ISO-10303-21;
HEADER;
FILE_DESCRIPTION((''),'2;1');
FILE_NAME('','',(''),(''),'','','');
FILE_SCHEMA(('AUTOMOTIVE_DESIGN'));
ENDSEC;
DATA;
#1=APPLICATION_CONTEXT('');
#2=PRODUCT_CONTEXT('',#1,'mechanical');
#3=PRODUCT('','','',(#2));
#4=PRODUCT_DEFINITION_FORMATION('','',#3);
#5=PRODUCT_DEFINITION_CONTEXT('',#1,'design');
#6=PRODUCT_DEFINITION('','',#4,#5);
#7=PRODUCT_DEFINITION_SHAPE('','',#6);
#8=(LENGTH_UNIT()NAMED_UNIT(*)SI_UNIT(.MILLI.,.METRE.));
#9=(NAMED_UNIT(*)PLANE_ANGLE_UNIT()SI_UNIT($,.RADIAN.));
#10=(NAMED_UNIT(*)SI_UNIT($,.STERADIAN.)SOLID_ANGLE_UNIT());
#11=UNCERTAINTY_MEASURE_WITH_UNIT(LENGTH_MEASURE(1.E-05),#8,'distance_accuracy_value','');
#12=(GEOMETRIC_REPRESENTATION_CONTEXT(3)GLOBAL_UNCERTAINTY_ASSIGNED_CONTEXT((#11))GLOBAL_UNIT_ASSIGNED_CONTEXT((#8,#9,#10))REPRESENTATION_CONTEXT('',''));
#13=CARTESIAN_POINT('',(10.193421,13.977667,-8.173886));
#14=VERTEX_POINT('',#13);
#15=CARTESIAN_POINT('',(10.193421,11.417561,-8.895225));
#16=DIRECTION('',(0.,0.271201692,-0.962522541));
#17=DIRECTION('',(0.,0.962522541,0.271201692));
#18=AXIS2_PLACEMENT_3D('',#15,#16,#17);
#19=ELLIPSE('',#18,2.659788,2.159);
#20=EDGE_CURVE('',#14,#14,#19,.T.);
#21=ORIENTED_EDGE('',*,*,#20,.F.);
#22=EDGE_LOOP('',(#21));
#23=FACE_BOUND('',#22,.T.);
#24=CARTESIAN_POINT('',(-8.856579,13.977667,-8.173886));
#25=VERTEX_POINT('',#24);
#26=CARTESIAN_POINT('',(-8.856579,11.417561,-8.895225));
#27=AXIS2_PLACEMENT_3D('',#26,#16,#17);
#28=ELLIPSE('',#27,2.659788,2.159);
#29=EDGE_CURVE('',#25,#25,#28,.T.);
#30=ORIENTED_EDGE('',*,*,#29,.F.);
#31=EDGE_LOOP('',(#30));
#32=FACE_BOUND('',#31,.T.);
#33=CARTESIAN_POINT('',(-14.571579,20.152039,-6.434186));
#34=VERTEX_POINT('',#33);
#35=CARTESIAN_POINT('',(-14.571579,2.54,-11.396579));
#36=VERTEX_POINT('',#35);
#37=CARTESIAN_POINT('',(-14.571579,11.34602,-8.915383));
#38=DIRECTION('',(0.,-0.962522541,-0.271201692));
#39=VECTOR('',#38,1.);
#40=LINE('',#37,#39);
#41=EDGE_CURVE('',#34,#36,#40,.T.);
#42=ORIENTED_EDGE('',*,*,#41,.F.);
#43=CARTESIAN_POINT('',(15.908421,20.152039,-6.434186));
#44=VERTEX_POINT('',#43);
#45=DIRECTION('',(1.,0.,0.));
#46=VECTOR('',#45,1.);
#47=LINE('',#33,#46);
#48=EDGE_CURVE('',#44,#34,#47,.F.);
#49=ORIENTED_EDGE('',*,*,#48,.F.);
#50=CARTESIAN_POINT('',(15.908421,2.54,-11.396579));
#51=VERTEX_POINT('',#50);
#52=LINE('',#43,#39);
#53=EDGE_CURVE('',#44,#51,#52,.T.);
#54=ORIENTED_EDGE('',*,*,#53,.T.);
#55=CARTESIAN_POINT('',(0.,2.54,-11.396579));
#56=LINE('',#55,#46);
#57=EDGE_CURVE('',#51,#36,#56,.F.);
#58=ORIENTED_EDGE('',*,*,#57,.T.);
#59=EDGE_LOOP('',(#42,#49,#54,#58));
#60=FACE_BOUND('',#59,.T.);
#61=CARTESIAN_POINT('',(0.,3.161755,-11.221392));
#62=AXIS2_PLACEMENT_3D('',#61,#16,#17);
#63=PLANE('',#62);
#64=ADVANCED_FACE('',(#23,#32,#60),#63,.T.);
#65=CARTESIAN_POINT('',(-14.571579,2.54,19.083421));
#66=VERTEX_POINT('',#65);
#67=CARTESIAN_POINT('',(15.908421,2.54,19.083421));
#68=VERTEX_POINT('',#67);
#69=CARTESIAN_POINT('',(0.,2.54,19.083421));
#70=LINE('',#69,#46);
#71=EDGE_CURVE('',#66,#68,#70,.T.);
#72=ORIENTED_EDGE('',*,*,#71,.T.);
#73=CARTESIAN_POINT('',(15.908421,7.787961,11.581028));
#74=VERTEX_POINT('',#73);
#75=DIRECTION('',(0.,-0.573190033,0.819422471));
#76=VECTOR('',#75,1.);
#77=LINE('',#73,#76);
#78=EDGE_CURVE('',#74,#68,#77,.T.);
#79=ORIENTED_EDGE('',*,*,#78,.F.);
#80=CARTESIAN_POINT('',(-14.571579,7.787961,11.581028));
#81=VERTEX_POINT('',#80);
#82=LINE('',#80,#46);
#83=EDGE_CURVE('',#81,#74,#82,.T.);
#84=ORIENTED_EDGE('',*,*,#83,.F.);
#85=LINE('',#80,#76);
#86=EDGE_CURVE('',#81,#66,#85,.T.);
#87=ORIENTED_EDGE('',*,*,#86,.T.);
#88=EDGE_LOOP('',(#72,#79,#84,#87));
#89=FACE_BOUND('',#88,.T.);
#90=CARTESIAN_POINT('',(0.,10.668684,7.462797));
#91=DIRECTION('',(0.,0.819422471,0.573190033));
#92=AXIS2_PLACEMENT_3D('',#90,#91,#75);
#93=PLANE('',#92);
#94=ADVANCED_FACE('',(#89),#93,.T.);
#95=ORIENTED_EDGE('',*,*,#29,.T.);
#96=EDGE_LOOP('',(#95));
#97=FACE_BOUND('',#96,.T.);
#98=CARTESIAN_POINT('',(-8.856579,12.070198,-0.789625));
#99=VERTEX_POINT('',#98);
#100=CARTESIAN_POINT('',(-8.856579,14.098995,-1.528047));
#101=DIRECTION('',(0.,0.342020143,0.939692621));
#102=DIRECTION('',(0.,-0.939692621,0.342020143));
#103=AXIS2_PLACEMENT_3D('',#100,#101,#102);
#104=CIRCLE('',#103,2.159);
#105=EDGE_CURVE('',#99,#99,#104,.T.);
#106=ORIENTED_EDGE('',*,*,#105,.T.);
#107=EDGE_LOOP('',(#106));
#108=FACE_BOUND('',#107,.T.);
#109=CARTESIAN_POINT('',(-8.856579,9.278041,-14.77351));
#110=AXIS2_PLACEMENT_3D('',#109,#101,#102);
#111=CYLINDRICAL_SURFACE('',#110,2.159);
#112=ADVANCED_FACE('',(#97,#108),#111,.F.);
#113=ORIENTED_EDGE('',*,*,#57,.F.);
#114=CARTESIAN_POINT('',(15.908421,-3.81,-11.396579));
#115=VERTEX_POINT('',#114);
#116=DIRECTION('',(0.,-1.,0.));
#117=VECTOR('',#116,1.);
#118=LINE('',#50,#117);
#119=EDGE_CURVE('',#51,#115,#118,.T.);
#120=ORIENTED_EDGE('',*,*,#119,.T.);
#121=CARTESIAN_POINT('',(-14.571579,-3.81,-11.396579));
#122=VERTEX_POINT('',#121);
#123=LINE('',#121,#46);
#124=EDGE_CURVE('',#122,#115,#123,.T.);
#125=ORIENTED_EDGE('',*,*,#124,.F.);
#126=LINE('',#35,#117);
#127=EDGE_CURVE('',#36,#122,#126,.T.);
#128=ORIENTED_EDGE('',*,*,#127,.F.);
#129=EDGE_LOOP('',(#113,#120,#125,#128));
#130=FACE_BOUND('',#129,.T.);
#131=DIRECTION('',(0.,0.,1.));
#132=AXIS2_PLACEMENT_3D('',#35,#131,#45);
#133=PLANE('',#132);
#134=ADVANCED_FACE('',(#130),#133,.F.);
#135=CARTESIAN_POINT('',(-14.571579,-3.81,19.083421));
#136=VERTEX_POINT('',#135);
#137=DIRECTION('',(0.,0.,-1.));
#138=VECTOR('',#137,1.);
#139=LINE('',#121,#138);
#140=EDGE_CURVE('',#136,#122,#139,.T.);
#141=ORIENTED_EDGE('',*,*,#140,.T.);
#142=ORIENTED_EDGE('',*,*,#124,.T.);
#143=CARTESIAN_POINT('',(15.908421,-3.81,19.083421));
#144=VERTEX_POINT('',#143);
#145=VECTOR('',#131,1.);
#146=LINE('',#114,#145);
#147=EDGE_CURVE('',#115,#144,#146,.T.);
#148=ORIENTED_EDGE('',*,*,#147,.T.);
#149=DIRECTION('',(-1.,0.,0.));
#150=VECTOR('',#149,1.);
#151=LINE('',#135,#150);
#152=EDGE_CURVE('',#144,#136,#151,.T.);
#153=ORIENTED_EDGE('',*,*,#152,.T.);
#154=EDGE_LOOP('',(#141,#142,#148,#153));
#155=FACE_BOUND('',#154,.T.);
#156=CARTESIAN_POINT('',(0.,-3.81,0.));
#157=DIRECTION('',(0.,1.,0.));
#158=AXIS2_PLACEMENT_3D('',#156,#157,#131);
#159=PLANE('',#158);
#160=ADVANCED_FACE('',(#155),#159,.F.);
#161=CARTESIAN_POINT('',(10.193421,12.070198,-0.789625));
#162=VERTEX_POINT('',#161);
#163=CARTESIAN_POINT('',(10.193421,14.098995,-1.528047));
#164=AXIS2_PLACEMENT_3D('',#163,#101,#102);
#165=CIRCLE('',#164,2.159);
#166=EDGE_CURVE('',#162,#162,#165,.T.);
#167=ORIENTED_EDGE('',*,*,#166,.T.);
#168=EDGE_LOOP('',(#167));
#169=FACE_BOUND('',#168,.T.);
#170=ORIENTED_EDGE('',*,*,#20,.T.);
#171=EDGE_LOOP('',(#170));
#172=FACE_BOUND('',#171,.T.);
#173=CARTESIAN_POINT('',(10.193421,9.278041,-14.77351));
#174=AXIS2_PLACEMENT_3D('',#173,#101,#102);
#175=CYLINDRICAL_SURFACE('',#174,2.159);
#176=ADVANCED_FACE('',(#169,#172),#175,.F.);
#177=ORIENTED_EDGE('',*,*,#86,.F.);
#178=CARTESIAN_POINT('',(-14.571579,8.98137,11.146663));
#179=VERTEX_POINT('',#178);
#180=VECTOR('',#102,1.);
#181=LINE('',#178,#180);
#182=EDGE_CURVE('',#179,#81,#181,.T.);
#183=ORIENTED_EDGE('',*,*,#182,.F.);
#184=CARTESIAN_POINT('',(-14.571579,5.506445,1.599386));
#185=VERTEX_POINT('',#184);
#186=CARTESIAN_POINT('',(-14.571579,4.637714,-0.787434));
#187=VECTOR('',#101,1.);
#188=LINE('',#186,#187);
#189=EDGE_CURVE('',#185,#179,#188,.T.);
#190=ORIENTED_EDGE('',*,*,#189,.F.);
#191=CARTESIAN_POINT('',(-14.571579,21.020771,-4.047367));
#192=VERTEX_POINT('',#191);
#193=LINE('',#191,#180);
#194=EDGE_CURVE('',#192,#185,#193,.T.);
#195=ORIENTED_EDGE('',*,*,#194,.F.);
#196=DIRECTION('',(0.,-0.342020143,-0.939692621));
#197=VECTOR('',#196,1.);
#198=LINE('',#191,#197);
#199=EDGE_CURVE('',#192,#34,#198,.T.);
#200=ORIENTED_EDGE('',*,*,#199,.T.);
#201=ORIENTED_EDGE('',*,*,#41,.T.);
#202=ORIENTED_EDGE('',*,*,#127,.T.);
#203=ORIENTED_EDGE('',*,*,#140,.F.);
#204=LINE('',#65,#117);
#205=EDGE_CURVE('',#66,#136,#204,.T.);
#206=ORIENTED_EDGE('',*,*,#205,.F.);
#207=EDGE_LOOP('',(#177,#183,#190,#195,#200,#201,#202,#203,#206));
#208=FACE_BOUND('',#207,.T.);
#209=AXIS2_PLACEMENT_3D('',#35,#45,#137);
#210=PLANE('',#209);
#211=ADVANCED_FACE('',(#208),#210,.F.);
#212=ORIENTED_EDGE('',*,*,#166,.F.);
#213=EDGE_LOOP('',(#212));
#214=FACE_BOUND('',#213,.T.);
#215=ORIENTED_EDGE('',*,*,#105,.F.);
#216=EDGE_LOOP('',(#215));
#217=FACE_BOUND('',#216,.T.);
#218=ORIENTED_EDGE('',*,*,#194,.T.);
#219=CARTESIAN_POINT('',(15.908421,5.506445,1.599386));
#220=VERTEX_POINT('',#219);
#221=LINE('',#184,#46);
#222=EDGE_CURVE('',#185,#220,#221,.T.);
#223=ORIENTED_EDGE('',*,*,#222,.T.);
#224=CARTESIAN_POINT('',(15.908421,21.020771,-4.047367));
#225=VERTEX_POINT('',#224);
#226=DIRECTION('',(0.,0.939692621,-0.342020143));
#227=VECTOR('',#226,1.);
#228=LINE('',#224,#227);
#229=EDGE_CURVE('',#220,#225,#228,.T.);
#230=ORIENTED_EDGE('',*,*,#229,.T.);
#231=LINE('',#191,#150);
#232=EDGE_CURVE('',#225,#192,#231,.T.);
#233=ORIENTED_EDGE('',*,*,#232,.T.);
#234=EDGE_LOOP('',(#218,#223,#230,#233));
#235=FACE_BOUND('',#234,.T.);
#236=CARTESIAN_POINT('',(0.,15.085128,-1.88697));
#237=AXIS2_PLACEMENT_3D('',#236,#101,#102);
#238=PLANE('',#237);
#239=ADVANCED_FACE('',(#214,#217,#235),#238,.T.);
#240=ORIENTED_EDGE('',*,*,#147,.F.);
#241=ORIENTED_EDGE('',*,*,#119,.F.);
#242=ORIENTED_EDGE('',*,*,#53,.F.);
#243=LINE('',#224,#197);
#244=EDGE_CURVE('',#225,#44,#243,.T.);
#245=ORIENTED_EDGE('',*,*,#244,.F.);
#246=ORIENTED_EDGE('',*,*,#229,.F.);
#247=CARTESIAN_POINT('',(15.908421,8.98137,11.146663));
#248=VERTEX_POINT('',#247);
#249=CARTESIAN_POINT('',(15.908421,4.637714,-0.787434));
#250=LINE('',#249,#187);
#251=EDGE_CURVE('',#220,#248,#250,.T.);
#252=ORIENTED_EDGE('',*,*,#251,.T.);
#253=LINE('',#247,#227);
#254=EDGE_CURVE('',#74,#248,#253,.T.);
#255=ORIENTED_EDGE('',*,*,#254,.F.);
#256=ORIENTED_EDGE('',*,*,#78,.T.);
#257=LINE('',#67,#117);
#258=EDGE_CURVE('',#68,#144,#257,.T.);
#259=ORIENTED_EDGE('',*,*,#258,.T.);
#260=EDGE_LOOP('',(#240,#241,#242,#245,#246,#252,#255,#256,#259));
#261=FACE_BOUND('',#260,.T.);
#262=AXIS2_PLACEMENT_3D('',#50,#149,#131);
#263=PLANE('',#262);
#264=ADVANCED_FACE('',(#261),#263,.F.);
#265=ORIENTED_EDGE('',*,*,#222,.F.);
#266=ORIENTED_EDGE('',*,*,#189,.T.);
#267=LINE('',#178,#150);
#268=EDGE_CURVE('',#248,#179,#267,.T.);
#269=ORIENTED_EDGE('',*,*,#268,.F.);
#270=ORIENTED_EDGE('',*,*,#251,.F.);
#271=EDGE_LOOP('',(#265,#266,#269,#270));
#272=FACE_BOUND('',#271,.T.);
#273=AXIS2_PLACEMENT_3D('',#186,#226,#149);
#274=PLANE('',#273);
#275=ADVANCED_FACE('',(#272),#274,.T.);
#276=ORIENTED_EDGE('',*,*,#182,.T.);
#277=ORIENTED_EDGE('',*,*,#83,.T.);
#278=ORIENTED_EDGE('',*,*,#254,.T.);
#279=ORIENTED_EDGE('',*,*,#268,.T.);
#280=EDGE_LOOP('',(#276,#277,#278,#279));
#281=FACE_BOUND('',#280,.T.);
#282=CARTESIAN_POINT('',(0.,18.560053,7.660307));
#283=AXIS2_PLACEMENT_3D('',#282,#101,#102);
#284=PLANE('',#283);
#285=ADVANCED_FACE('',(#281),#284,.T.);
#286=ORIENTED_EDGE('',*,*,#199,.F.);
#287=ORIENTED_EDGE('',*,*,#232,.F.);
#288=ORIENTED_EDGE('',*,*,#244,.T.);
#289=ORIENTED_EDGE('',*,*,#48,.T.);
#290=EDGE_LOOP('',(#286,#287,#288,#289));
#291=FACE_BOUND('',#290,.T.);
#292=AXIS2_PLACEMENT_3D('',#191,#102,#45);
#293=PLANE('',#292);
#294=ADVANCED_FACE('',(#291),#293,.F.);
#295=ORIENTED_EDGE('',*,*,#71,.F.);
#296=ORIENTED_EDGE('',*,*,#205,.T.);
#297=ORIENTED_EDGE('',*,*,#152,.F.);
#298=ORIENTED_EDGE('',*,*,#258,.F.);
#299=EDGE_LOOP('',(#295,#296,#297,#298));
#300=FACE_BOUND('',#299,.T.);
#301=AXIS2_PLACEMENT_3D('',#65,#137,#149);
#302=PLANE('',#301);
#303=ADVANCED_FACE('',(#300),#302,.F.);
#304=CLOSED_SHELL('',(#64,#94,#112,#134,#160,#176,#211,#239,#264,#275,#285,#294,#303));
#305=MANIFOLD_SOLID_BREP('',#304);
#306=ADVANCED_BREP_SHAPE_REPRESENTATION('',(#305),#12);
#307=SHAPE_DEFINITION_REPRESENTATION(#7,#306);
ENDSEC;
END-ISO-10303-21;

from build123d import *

# Parameters (mm, degrees)
SKETCH1_W                = 30.48
SKETCH1_H                = 16.51
BOSS_EXTRUDE1_DEPTH      = 2.54
BOSS_EXTRUDE2_DEPTH      = 10.16
BOSS_EXTRUDE2_DEPTH_BACK = 2.54
SKETCH3_W                = 30.48
SKETCH3_H                = 1.27
SKETCH4_W                = 30.48
SKETCH4_H                = 30.48
BOSS_EXTRUDE3_DEPTH      = 2.54
BODY_MOVE_COPY3_ANGLE    = 70
LOFT2_START              = -14.571578947
LOFT2_DEPTH              = 30.48
SKETCH5_R                = 2.159
CUT_EXTRUDE1_DEPTH       = 31.007586006
SKETCH6_W                = 30.48
SKETCH6_H                = 30.48
BOSS_EXTRUDE4_DEPTH      = 3.81


# Read off the part's stored shape, not the designer's step: Loft2
with BuildPart() as part:
    # Sketch1 → Boss-Extrude1 (new body)
    with BuildSketch(Plane(origin=(0, 0, 0), x_dir=(1, 0, 0), z_dir=(0, 1, 0))):
        with Locations((0.668421053, -1.938421053)):
            Rectangle(SKETCH1_W, SKETCH1_H)
    extrude(amount=BOSS_EXTRUDE1_DEPTH)

    # Sketch3 → Boss-Extrude2 (add, two sides: drawn at the far end of the back side and taken through both)
    with BuildSketch(Plane(origin=(0, 2.54, 0), x_dir=(1, 0, 0), z_dir=(0, 1, 0)).offset(-BOSS_EXTRUDE2_DEPTH_BACK)):
        with Locations((0.668421053, -10.828421053)):
            Rectangle(SKETCH3_W, SKETCH3_H)
    extrude(amount=BOSS_EXTRUDE2_DEPTH + BOSS_EXTRUDE2_DEPTH_BACK)


with BuildPart() as part_1:
    # Body-Move/Copy1: moved
    add(part.part.moved(Location((0, 7.62, 0))))


with BuildPart() as body_2:
    # Sketch4 → Boss-Extrude3 (new body)
    with BuildSketch(Plane(origin=(0, 0, 0), x_dir=(1, 0, 0), z_dir=(0, 1, 0))):
        with Locations((0.668421053, -3.843421053)):
            Rectangle(SKETCH4_W, SKETCH4_H)
    extrude(amount=BOSS_EXTRUDE3_DEPTH)


with BuildPart() as part_2:
    # Body-Move/Copy3: moved
    add(part_1.part.rotate(Axis((0, 13.97, 2.573421053), (1, 0, 0)), BODY_MOVE_COPY3_ANGLE))


    add(body_2.part)  # loft1 joins it to this body
    # loft from a face of the part (loft1)
    loft([part_2.faces().sort_by_distance((0.668421053, 5.616132601, 5.613980127))[0], part_2.faces().sort_by_distance((0.668421053, 2.54, 3.843421053))[0]])

    # Loft2 outline → Loft2 (add)
    with BuildSketch(Plane.YZ.offset(LOFT2_START)):
        Polygon((3.444304691, -0.353068015), (2.54, -11.396578947), (20.152039489, -6.434186164), align=None)
    extrude(amount=LOFT2_DEPTH)

    # Sketch5 → Cut-Extrude1 (cut, through all)
    with BuildSketch(Plane(origin=(0, 1.158164402, 3.182030543), x_dir=(1, 0, 0), z_dir=(0, 0.3420201433256677, 0.9396926207859089))):
        with Locations(Location((-8.856578947, 13.771344075, 0), (0, 0, 270))):
            Circle(SKETCH5_R)
        with Locations(Location((10.193421053, 13.771344075, 0), (0, 0, 270))):
            Circle(SKETCH5_R)
    extrude(amount=-CUT_EXTRUDE1_DEPTH, mode=Mode.SUBTRACT)

    # Sketch6 → Boss-Extrude4 (add)
    with BuildSketch(Plane.XZ):
        with Locations((0.668421053, 3.843421053)):
            Rectangle(SKETCH6_W, SKETCH6_H)
    extrude(amount=BOSS_EXTRUDE4_DEPTH)


solid = part_2.part
